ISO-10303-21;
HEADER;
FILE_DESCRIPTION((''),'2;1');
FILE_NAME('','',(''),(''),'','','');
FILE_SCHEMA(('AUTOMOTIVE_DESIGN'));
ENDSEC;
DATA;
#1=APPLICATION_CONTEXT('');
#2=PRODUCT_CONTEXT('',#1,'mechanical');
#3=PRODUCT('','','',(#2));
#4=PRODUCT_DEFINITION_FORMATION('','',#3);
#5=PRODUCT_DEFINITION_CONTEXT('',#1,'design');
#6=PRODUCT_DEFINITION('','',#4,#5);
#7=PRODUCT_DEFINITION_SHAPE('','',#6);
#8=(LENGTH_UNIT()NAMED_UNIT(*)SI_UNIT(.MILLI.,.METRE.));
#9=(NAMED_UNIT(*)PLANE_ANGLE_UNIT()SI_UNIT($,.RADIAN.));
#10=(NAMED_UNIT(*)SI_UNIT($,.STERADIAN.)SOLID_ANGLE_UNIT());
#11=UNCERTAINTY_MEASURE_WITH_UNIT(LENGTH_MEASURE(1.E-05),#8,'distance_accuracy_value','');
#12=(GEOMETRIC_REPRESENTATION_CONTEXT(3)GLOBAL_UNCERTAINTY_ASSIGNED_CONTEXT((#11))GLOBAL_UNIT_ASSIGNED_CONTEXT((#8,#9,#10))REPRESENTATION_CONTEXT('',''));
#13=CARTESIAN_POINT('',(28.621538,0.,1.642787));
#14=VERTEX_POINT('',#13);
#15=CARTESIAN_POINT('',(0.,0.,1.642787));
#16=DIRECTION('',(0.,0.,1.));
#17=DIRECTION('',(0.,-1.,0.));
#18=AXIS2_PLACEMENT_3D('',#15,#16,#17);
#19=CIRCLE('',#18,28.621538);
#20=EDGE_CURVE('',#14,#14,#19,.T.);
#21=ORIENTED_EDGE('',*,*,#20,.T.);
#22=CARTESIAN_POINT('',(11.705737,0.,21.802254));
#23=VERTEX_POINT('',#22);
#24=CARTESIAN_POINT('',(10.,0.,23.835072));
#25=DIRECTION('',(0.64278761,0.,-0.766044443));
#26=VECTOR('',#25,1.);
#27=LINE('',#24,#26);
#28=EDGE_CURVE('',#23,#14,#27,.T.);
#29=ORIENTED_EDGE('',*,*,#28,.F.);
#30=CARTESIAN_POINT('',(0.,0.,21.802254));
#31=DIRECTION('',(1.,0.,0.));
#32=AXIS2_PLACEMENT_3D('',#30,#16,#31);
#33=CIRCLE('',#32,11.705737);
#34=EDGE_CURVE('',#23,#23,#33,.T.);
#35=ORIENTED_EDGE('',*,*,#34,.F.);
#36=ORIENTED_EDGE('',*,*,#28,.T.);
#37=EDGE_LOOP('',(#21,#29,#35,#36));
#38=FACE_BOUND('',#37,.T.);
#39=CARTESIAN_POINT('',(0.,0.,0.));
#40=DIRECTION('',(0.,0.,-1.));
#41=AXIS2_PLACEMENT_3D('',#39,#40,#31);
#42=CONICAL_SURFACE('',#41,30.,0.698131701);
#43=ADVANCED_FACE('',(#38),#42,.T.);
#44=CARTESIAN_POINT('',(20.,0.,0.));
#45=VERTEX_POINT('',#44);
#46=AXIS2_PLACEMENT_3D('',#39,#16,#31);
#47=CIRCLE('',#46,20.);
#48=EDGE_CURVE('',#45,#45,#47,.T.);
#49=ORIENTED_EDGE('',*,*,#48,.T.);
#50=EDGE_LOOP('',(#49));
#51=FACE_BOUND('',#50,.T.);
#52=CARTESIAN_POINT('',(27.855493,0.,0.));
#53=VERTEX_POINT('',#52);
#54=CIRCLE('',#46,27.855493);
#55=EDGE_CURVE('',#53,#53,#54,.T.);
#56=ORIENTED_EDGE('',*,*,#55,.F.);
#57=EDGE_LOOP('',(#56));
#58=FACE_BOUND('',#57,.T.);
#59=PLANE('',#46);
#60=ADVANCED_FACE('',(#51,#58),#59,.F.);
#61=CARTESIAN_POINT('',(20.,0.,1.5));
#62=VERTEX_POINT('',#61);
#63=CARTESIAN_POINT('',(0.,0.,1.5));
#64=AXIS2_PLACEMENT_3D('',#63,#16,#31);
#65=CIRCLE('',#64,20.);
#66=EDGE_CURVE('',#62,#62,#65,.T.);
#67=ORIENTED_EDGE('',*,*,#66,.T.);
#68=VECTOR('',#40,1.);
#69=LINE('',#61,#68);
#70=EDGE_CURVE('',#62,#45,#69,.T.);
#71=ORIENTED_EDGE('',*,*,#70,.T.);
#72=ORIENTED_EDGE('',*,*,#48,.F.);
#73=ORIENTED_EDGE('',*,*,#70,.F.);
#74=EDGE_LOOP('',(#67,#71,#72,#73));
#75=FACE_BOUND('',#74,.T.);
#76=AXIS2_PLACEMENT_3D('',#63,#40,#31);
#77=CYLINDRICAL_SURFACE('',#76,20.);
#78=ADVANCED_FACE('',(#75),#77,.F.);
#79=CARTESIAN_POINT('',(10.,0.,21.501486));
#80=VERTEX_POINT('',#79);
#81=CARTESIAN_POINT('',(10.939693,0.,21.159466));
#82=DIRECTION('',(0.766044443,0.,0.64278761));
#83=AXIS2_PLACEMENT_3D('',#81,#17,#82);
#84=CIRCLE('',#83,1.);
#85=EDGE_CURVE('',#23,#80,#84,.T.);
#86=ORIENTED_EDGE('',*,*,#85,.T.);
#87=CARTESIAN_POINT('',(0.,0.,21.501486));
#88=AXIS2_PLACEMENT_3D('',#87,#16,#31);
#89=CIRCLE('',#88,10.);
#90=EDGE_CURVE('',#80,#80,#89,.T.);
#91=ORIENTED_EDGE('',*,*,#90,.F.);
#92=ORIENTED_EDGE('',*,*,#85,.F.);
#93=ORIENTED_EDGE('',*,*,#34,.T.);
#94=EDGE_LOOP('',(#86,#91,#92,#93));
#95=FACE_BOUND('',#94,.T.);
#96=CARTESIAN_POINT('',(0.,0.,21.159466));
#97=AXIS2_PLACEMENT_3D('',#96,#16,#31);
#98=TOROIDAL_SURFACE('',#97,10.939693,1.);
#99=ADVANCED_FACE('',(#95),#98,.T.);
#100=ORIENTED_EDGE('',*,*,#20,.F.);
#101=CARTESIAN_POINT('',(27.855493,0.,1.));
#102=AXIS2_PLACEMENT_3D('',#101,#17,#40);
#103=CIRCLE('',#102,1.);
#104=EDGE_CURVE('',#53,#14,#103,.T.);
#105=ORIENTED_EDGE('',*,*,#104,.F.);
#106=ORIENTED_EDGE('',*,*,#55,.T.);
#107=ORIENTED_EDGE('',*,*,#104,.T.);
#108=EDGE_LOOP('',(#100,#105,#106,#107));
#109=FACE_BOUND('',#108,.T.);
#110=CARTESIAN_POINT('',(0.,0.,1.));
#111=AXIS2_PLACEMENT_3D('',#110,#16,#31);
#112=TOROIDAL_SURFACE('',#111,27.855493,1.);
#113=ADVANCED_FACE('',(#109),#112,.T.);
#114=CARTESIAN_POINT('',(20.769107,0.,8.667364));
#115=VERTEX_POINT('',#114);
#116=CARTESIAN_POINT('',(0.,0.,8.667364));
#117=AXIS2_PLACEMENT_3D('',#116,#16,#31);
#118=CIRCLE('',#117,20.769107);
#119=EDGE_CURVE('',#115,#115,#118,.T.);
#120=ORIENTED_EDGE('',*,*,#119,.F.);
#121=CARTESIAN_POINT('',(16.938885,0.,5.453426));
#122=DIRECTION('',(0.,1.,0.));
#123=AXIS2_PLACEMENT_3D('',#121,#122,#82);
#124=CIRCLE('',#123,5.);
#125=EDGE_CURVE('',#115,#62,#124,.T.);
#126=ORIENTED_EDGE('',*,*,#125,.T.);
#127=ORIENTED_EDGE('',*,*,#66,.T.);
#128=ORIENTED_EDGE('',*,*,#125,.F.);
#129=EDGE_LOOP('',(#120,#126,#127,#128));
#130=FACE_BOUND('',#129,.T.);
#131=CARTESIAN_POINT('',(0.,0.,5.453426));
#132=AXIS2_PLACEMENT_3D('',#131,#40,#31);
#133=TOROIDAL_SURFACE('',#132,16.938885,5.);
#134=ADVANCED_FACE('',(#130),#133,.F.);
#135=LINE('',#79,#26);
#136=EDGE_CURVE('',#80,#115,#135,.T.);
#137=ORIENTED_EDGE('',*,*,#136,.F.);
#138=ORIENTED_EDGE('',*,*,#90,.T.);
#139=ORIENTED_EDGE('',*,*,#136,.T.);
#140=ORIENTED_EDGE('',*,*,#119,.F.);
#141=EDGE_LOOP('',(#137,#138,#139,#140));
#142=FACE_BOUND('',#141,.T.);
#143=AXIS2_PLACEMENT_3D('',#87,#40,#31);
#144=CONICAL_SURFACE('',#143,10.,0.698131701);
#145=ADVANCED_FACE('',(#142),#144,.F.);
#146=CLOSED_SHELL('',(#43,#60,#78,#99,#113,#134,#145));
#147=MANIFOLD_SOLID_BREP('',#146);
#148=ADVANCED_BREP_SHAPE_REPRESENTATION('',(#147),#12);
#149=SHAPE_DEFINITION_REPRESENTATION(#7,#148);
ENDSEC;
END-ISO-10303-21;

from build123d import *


# Not quite as in the source:
# - a fillet or chamfer that OpenCascade refuses, or shapes differently, is made with other operations: its cross-section is extruded or revolved along the edge and cut away or added


with BuildPart() as f1:
    # F0 (on Front) → F1 (revolve)
    with BuildSketch(Plane.XZ):
        Polygon((20, 1.5), (20, 0), (30, 0), (10, 23.8350718519), (10, 21.5014861116), (26.7832396192, 1.5), align=None)
    revolve(axis=Axis((0, 0, 12.1238185093), (0, 0, 1)))

    # F2: fillet of radius 5 on 1 edges, made by hand

    # F2_s1 → F2_t2 (revolve)
    with BuildSketch(Plane.XZ):
        with BuildLine():
            ThreePointArc((20.7691072795, 8.6673638222), (21.9103444044, 4.9199541008), (20, 1.5))
            Line((20, 1.5), (20.0612222987, 1.4209314845))
            ThreePointArc((20.0612222987, 1.4209314845), (23.3916198096, 1.4), (26.7832396192, 1.4))
            Line((26.7832396192, 1.4), (26.8598440635, 1.564278761))
            Line((26.8598440635, 1.564278761), (20.8457117239, 8.7316425831))
            Line((20.8457117239, 8.7316425831), (20.7691072795, 8.6673638222))
        make_face()
    revolve(axis=Axis((0, 0, 1.5), (0, 0, 1)))

    # F3: fillet of radius 1 on 2 edges, made by hand

    # F3_s1 → F3_t2 (revolve, cut)
    with BuildSketch(Plane.XZ):
        with BuildLine():
            ThreePointArc((27.8554930795, 0), (28.7618008665, 0.5773817383), (28.6215375226, 1.6427876097))
            Line((28.6215375226, 1.6427876097), (28.6368584115, 1.6556433619))
            Line((28.6368584115, 1.6556433619), (30.0153208889, 0.0128557522))
            Line((30.0153208889, 0.0128557522), (30, -0.02))
            Line((30, -0.02), (27.8554930795, -0.02))
            Line((27.8554930795, -0.02), (27.8554930795, 0))
        make_face()
    revolve(axis=Axis((0, 0, 0), (0, 0, 1)), mode=Mode.SUBTRACT)

    # F3_s3 → F3_t4 (revolve, cut)
    with BuildSketch(Plane.XZ):
        with BuildLine():
            ThreePointArc((11.7057370639, 21.802253578), (10.7660444431, 22.1442737213), (10, 21.5014861116))
            Line((10, 21.5014861116), (9.9812061476, 21.5083265145))
            ThreePointArc((9.9812061476, 21.5083265145), (9.98, 22.6682789817), (9.98, 23.8350718519))
            Line((9.98, 23.8350718519), (10.0153208889, 23.8479276041))
            Line((10.0153208889, 23.8479276041), (11.7210579528, 21.8151093301))
            Line((11.7210579528, 21.8151093301), (11.7057370639, 21.802253578))
        make_face()
    revolve(axis=Axis((0, 0, 23.8350718519), (0, 0, 1)), mode=Mode.SUBTRACT)


solid = f1.part
